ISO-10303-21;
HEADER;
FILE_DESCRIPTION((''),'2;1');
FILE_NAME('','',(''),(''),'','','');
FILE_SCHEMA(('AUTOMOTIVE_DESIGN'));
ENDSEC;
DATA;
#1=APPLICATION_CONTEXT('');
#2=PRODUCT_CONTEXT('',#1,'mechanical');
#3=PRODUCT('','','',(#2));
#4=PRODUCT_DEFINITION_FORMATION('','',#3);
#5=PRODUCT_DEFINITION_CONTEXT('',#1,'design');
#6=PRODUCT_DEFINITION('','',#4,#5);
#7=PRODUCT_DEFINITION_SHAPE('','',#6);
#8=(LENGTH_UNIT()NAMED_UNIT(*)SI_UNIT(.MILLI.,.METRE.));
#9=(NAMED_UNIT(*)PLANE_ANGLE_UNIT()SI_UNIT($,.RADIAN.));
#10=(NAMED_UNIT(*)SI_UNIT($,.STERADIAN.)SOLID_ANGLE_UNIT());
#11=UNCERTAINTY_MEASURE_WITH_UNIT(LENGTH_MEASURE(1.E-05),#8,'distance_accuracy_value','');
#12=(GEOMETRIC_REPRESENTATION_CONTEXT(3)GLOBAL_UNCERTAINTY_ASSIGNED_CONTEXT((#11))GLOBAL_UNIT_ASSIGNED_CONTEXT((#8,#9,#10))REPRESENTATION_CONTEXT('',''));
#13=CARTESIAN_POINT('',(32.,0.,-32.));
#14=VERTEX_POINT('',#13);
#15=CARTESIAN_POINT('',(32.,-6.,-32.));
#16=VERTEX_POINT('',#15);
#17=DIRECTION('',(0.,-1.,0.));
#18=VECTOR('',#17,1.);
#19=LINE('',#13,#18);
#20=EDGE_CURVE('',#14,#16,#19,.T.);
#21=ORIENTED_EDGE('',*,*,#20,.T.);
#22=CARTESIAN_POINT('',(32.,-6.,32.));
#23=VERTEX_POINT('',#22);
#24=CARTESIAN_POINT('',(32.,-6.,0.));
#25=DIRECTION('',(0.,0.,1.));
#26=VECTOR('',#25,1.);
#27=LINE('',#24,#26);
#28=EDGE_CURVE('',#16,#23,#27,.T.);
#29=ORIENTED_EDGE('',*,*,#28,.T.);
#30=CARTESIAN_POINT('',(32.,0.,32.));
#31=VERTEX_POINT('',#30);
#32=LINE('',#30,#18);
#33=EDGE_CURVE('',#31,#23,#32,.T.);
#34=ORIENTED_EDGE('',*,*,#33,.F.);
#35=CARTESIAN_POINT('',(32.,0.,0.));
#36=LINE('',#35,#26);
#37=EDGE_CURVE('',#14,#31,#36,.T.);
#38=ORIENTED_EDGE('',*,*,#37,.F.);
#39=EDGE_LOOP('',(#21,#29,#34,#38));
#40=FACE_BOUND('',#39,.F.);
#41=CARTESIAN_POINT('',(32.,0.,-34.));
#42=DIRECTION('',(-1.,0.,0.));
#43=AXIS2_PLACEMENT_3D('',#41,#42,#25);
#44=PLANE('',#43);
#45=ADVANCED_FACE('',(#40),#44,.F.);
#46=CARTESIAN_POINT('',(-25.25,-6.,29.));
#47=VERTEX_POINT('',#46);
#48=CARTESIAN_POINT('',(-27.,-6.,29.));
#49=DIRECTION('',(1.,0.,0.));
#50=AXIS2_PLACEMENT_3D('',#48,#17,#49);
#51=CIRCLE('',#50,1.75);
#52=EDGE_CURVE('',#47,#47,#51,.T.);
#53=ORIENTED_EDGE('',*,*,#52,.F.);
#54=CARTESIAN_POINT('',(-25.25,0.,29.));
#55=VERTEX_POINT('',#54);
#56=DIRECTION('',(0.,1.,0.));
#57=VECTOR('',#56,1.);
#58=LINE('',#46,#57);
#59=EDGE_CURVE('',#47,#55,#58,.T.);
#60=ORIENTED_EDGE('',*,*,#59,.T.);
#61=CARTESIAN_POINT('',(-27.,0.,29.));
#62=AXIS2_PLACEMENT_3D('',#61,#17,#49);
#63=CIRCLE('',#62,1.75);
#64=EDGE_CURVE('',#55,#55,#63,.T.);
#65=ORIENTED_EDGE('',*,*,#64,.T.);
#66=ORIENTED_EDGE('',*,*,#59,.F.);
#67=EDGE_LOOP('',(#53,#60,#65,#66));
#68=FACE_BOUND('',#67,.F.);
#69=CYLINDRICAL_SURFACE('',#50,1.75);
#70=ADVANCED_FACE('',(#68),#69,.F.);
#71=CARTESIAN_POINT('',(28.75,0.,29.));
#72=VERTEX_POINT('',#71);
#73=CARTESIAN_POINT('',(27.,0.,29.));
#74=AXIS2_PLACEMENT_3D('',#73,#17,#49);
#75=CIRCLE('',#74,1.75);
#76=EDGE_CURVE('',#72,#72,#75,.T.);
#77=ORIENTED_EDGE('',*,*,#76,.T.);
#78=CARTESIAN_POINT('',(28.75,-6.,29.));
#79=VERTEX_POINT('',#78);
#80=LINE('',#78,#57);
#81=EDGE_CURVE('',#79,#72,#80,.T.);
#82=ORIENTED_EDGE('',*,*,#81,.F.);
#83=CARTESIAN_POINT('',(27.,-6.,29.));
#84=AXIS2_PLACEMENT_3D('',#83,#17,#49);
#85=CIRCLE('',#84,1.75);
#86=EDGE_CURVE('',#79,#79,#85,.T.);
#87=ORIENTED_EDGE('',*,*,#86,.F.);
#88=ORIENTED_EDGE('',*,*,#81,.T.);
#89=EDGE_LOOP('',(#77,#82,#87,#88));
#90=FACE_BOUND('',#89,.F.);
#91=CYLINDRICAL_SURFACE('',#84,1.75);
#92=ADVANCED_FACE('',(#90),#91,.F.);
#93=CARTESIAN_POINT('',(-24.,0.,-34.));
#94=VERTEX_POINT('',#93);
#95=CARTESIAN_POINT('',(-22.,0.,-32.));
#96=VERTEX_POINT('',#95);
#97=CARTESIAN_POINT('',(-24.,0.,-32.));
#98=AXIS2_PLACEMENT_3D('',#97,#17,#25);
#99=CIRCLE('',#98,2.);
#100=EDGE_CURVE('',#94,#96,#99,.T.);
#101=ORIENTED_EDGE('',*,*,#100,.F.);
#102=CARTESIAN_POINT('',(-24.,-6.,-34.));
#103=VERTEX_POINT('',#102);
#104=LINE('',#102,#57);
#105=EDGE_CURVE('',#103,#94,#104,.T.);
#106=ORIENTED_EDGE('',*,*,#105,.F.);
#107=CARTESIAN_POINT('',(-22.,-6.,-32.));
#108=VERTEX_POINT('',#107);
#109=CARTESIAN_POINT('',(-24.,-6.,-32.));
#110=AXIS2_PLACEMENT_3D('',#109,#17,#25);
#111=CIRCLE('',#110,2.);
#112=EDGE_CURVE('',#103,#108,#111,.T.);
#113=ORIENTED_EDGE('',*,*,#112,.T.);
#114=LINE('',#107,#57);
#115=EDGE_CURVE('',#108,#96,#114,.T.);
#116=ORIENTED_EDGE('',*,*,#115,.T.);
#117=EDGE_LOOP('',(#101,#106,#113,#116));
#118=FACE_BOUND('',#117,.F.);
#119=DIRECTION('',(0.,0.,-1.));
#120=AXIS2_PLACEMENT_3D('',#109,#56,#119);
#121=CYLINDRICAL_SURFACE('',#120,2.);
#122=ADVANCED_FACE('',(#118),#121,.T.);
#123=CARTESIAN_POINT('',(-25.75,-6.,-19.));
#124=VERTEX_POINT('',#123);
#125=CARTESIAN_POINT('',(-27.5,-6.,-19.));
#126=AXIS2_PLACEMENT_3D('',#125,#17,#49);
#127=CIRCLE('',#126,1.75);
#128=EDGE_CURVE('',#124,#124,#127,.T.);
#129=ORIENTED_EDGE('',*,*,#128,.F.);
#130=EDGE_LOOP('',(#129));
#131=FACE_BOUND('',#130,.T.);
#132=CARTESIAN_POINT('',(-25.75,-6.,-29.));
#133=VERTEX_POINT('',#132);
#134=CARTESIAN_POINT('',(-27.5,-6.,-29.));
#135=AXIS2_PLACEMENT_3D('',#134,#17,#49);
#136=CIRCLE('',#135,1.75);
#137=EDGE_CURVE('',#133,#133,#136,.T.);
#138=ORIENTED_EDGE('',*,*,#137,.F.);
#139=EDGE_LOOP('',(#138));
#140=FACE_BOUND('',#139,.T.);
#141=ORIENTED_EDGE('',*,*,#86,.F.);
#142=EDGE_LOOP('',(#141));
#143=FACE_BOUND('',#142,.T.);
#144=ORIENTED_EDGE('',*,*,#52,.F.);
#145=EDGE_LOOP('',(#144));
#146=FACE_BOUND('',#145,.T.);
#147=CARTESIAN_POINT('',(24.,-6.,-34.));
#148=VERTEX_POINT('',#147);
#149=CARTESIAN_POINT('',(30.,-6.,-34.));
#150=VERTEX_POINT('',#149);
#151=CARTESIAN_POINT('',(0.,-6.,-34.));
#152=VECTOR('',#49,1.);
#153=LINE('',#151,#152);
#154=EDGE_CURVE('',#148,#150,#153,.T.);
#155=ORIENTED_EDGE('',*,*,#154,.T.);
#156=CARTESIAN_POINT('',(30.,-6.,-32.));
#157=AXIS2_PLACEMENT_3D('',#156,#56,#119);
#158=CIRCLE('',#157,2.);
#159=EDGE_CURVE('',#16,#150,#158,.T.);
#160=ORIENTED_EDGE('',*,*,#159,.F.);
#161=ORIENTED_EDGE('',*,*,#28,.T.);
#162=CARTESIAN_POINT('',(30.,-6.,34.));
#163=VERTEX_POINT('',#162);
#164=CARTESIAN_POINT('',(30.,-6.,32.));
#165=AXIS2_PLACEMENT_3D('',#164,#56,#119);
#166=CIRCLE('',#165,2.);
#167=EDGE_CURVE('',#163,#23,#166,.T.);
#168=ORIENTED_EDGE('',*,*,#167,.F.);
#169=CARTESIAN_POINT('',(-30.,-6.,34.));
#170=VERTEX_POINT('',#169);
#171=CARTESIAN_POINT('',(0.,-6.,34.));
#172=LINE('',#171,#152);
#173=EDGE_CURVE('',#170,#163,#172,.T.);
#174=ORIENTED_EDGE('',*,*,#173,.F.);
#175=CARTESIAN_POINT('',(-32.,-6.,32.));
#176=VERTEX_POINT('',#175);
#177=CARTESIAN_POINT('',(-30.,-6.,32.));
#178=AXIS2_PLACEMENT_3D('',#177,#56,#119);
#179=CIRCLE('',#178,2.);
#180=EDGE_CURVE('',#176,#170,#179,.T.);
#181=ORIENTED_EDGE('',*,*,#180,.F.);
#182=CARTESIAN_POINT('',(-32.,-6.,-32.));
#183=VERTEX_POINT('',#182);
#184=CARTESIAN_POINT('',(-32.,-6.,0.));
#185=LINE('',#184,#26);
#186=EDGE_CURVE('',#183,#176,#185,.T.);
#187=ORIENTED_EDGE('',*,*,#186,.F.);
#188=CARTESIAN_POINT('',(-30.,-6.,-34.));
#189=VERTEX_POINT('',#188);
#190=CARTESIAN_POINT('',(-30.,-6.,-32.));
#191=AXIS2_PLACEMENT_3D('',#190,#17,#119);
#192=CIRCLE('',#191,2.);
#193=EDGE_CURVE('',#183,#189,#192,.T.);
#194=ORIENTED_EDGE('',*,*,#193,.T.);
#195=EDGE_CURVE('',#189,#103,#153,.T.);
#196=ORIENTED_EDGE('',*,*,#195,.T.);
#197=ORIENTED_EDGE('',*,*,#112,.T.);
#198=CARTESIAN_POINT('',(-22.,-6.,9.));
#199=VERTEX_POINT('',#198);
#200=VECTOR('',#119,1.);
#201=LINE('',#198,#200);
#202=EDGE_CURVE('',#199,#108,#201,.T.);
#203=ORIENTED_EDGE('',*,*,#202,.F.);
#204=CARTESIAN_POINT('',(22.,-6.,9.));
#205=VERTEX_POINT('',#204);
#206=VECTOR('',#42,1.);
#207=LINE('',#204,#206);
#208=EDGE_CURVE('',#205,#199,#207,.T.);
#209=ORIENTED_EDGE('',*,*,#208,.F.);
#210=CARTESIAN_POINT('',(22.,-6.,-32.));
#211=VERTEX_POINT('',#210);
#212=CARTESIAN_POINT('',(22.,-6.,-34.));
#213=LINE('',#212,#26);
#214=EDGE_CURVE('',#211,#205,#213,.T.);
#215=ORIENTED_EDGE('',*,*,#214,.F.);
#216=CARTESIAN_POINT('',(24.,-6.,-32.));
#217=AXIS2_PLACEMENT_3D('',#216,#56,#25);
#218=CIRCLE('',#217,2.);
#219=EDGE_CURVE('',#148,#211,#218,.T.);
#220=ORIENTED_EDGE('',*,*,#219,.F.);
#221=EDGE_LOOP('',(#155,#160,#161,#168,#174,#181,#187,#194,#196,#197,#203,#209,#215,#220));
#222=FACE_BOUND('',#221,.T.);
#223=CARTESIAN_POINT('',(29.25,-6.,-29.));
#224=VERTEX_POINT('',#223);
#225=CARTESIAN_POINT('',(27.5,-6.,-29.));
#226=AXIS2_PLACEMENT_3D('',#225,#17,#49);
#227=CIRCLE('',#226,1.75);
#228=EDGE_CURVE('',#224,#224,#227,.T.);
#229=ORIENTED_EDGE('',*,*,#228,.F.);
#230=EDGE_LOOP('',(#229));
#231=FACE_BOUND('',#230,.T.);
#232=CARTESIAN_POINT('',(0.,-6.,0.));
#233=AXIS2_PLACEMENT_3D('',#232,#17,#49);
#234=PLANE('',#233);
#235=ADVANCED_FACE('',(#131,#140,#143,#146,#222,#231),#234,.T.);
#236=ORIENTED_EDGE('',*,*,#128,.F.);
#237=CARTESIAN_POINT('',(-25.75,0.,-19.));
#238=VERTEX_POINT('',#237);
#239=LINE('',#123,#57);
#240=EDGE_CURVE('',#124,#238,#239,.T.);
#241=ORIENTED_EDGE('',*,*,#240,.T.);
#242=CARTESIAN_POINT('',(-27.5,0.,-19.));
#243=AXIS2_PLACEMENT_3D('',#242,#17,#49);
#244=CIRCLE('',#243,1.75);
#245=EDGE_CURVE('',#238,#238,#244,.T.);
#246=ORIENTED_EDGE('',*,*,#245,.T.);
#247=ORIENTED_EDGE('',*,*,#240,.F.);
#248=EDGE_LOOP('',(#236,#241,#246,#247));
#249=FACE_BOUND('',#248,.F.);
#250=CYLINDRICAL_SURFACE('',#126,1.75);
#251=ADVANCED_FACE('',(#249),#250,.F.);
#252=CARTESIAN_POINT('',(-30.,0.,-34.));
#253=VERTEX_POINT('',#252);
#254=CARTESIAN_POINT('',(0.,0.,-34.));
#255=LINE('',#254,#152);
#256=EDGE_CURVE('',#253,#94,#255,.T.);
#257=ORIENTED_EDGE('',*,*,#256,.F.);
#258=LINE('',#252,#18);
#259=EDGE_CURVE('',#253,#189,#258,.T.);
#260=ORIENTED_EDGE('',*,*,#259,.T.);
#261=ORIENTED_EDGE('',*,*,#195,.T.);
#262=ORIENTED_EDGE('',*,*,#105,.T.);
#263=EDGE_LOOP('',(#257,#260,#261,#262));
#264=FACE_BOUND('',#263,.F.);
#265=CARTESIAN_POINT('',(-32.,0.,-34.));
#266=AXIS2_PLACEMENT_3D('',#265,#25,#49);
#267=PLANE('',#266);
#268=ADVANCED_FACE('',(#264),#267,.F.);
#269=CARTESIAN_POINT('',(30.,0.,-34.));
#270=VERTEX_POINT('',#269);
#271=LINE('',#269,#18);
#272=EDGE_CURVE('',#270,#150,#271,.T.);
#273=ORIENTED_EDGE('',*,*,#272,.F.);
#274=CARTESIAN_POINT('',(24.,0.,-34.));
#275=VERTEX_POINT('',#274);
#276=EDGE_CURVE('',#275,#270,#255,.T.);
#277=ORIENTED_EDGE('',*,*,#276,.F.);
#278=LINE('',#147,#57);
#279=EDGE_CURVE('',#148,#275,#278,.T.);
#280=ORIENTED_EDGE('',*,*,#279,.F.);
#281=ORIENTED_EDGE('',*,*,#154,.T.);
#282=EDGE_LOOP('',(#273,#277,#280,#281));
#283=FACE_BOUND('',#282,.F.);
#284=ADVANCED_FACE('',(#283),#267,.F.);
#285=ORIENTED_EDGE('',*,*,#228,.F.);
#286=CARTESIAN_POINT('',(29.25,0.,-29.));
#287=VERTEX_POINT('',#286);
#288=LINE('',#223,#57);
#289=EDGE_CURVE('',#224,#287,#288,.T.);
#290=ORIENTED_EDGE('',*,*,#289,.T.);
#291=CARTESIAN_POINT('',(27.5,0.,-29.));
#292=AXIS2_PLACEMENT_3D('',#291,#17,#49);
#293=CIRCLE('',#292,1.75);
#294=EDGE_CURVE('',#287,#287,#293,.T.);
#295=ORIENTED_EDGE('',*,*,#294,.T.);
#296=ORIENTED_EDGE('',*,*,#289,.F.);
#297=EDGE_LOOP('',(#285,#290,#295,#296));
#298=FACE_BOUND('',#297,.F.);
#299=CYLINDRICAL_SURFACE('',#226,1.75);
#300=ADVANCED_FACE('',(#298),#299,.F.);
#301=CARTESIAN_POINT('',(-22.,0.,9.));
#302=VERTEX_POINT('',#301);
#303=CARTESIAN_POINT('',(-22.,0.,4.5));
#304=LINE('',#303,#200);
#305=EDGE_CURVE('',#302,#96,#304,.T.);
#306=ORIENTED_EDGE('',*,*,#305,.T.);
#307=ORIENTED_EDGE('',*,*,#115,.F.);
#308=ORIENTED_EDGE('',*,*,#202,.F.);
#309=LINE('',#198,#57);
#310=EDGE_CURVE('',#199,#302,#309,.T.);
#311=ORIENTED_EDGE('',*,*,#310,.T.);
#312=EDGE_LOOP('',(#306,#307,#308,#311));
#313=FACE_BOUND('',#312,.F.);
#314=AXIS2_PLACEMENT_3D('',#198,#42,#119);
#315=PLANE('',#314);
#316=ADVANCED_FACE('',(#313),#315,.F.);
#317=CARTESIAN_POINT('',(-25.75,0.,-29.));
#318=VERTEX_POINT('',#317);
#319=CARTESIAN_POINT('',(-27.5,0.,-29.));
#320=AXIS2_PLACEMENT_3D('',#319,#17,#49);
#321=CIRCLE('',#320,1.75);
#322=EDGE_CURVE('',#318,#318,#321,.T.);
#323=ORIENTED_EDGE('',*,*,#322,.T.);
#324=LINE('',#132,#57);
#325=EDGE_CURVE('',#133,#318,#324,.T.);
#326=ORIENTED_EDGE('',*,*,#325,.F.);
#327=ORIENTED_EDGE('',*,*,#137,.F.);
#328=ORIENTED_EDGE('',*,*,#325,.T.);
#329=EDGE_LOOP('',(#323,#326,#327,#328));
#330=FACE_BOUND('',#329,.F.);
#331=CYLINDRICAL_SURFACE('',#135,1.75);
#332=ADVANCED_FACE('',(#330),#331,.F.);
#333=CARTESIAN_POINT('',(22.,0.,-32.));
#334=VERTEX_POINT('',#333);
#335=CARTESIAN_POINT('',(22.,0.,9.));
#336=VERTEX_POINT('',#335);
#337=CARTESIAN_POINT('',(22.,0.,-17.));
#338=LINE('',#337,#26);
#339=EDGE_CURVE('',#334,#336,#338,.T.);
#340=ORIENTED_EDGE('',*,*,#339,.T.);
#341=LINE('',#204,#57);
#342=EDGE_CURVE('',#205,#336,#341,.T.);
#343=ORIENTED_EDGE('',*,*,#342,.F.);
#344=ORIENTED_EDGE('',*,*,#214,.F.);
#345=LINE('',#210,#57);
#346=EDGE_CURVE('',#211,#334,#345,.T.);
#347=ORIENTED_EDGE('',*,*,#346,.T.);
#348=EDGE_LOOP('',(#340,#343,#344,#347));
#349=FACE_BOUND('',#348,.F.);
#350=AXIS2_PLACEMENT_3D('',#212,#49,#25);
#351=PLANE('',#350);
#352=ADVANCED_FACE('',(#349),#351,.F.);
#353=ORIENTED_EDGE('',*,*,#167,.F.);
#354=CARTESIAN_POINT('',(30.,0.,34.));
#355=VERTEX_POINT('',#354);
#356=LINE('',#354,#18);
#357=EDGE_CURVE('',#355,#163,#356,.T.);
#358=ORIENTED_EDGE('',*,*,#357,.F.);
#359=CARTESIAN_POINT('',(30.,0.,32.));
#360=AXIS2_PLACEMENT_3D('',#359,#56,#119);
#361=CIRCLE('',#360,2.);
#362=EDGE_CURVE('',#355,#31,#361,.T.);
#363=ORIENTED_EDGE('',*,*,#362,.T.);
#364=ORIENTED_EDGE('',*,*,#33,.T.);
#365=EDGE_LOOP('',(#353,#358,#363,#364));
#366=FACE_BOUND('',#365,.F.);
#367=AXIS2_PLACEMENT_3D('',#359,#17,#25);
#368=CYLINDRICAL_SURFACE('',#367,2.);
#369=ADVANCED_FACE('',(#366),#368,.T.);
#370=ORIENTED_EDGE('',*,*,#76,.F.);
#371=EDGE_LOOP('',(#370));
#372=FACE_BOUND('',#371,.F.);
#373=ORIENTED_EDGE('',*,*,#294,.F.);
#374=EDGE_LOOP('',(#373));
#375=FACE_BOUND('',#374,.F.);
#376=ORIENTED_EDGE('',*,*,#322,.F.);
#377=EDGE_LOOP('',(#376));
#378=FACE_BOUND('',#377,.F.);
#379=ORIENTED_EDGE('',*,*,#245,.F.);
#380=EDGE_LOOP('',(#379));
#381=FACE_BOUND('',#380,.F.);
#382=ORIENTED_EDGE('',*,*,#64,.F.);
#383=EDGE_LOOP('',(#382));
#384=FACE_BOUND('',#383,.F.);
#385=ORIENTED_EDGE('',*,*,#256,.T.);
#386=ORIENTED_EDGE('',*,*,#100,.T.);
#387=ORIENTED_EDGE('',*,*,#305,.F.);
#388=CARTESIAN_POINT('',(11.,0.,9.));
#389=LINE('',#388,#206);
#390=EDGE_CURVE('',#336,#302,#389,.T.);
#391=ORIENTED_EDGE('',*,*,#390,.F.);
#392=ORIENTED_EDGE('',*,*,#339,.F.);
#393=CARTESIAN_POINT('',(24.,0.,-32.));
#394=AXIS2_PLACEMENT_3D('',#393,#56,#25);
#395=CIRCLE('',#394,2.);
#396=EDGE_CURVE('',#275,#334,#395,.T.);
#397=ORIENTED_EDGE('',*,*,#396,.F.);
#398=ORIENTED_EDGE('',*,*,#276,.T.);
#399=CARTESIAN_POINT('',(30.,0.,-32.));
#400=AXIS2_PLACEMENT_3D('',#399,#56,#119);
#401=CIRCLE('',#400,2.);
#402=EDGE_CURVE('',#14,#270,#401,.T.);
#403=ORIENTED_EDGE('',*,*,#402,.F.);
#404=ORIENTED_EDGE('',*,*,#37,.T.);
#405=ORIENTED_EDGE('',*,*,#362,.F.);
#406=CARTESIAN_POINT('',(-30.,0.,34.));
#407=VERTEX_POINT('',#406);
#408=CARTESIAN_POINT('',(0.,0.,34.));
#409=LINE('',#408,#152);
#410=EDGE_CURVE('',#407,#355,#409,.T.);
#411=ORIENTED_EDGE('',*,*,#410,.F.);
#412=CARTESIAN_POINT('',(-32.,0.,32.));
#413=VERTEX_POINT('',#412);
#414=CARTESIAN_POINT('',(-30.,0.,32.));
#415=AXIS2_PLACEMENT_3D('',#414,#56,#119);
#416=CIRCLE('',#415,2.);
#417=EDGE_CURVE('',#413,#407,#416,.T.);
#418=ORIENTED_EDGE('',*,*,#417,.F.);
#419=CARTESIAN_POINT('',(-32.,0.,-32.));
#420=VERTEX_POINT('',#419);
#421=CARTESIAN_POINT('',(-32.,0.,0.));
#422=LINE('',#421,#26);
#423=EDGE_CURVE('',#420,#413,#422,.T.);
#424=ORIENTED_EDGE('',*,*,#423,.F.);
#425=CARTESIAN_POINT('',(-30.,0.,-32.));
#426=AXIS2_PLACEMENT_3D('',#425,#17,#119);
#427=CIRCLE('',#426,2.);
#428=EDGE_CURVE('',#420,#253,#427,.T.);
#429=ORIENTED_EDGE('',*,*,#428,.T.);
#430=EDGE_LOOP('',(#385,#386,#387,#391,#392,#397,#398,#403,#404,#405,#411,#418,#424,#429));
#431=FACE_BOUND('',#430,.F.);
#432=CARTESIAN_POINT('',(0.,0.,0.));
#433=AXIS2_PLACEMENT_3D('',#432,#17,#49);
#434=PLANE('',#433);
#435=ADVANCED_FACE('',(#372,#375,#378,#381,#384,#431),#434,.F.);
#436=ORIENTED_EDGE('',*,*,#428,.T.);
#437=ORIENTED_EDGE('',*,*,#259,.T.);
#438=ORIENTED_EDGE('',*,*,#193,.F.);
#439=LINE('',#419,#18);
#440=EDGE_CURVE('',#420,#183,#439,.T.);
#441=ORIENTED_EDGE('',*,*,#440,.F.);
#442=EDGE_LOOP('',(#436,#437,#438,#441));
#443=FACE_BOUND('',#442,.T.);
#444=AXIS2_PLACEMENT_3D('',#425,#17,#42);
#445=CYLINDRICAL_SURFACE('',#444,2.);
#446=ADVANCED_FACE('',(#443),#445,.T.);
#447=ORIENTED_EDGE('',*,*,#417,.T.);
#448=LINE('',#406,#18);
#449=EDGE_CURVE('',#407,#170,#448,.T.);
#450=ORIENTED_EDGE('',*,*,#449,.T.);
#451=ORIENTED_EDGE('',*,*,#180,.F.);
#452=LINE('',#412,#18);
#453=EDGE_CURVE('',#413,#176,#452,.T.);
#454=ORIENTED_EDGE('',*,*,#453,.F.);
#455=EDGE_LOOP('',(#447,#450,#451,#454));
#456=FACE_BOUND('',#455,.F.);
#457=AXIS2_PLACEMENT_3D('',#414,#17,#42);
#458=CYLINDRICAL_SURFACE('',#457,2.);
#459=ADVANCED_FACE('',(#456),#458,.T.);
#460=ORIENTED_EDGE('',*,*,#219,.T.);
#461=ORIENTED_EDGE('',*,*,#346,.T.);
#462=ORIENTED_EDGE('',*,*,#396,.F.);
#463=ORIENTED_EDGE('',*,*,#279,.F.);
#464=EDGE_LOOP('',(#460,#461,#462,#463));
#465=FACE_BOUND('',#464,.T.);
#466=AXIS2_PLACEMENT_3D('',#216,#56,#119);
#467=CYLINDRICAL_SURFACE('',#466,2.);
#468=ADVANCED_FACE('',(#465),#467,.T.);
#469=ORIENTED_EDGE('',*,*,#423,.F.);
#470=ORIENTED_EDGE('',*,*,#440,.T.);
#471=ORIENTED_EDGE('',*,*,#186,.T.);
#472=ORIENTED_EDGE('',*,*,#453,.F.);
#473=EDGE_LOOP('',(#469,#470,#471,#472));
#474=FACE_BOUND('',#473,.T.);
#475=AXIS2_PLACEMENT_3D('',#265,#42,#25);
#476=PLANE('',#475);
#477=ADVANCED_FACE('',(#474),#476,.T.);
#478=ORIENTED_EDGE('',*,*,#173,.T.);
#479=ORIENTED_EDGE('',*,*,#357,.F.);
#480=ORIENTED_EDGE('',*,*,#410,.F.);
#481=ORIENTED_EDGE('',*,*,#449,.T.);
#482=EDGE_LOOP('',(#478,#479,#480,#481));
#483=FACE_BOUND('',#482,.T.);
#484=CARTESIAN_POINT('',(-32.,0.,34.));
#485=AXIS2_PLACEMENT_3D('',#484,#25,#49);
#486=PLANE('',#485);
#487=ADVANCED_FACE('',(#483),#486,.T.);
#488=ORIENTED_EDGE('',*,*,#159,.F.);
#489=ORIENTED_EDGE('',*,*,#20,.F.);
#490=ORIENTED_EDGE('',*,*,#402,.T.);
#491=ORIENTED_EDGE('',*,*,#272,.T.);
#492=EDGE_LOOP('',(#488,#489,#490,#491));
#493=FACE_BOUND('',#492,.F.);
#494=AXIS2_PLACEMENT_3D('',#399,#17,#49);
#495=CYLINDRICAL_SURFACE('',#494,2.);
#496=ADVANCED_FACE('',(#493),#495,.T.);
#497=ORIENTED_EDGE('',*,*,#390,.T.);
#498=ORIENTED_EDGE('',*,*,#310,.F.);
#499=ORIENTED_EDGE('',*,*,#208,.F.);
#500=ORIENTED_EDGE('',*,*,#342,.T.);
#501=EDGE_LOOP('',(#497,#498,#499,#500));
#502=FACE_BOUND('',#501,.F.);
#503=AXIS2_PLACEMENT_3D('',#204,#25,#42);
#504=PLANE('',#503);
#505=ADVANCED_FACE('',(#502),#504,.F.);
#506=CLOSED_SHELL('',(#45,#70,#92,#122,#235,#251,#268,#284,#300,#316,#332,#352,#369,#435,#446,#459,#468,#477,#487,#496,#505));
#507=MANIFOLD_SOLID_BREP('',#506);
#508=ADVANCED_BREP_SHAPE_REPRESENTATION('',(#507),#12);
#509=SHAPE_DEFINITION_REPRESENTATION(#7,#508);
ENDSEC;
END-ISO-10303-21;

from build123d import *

# Parameters (mm, degrees)
F0_W     = 64
F0_H     = 68
F1_DEPTH = 6
F2_R     = 1.75
F3_DEPTH = 25
F4_R     = 2


# Not quite as in the source:
# - a feature names something its author has since deleted; it is built from what else it names


with BuildPart() as f1:
    # F0 (on Front) → F1 (new body)
    with BuildSketch(Plane.XZ):
        Rectangle(F0_W, F0_H)
    extrude(amount=F1_DEPTH)

    # F2 (on face) → F3 (cut)
    with BuildSketch(Plane.XZ.offset(6)):
        Polygon((22, 9), (0, 9), (-22, 9), (-22, -34), (22, -34), align=None)
        with Locations((27.5, -29)):
            Circle(F2_R)
        with Locations((-27.5, -19)):
            Circle(F2_R)
        with Locations((-27.5, -29)):
            Circle(F2_R)
        with Locations((-27, 29)):
            Circle(F2_R)
        with Locations((27, 29)):
            Circle(F2_R)
    extrude(amount=-F3_DEPTH, mode=Mode.SUBTRACT)

    # F4
    f4_edges = [f1.edges().sort_by_distance(p)[0] for p in [
        (-32, -3, 34),
        (32, -3, 34),
        (-32, -3, -34),
        (32, -3, -34),
        (-22, -3, -34),
        (22, -3, -34),
    ]]
    fillet(f4_edges, radius=F4_R)


solid = f1.part
